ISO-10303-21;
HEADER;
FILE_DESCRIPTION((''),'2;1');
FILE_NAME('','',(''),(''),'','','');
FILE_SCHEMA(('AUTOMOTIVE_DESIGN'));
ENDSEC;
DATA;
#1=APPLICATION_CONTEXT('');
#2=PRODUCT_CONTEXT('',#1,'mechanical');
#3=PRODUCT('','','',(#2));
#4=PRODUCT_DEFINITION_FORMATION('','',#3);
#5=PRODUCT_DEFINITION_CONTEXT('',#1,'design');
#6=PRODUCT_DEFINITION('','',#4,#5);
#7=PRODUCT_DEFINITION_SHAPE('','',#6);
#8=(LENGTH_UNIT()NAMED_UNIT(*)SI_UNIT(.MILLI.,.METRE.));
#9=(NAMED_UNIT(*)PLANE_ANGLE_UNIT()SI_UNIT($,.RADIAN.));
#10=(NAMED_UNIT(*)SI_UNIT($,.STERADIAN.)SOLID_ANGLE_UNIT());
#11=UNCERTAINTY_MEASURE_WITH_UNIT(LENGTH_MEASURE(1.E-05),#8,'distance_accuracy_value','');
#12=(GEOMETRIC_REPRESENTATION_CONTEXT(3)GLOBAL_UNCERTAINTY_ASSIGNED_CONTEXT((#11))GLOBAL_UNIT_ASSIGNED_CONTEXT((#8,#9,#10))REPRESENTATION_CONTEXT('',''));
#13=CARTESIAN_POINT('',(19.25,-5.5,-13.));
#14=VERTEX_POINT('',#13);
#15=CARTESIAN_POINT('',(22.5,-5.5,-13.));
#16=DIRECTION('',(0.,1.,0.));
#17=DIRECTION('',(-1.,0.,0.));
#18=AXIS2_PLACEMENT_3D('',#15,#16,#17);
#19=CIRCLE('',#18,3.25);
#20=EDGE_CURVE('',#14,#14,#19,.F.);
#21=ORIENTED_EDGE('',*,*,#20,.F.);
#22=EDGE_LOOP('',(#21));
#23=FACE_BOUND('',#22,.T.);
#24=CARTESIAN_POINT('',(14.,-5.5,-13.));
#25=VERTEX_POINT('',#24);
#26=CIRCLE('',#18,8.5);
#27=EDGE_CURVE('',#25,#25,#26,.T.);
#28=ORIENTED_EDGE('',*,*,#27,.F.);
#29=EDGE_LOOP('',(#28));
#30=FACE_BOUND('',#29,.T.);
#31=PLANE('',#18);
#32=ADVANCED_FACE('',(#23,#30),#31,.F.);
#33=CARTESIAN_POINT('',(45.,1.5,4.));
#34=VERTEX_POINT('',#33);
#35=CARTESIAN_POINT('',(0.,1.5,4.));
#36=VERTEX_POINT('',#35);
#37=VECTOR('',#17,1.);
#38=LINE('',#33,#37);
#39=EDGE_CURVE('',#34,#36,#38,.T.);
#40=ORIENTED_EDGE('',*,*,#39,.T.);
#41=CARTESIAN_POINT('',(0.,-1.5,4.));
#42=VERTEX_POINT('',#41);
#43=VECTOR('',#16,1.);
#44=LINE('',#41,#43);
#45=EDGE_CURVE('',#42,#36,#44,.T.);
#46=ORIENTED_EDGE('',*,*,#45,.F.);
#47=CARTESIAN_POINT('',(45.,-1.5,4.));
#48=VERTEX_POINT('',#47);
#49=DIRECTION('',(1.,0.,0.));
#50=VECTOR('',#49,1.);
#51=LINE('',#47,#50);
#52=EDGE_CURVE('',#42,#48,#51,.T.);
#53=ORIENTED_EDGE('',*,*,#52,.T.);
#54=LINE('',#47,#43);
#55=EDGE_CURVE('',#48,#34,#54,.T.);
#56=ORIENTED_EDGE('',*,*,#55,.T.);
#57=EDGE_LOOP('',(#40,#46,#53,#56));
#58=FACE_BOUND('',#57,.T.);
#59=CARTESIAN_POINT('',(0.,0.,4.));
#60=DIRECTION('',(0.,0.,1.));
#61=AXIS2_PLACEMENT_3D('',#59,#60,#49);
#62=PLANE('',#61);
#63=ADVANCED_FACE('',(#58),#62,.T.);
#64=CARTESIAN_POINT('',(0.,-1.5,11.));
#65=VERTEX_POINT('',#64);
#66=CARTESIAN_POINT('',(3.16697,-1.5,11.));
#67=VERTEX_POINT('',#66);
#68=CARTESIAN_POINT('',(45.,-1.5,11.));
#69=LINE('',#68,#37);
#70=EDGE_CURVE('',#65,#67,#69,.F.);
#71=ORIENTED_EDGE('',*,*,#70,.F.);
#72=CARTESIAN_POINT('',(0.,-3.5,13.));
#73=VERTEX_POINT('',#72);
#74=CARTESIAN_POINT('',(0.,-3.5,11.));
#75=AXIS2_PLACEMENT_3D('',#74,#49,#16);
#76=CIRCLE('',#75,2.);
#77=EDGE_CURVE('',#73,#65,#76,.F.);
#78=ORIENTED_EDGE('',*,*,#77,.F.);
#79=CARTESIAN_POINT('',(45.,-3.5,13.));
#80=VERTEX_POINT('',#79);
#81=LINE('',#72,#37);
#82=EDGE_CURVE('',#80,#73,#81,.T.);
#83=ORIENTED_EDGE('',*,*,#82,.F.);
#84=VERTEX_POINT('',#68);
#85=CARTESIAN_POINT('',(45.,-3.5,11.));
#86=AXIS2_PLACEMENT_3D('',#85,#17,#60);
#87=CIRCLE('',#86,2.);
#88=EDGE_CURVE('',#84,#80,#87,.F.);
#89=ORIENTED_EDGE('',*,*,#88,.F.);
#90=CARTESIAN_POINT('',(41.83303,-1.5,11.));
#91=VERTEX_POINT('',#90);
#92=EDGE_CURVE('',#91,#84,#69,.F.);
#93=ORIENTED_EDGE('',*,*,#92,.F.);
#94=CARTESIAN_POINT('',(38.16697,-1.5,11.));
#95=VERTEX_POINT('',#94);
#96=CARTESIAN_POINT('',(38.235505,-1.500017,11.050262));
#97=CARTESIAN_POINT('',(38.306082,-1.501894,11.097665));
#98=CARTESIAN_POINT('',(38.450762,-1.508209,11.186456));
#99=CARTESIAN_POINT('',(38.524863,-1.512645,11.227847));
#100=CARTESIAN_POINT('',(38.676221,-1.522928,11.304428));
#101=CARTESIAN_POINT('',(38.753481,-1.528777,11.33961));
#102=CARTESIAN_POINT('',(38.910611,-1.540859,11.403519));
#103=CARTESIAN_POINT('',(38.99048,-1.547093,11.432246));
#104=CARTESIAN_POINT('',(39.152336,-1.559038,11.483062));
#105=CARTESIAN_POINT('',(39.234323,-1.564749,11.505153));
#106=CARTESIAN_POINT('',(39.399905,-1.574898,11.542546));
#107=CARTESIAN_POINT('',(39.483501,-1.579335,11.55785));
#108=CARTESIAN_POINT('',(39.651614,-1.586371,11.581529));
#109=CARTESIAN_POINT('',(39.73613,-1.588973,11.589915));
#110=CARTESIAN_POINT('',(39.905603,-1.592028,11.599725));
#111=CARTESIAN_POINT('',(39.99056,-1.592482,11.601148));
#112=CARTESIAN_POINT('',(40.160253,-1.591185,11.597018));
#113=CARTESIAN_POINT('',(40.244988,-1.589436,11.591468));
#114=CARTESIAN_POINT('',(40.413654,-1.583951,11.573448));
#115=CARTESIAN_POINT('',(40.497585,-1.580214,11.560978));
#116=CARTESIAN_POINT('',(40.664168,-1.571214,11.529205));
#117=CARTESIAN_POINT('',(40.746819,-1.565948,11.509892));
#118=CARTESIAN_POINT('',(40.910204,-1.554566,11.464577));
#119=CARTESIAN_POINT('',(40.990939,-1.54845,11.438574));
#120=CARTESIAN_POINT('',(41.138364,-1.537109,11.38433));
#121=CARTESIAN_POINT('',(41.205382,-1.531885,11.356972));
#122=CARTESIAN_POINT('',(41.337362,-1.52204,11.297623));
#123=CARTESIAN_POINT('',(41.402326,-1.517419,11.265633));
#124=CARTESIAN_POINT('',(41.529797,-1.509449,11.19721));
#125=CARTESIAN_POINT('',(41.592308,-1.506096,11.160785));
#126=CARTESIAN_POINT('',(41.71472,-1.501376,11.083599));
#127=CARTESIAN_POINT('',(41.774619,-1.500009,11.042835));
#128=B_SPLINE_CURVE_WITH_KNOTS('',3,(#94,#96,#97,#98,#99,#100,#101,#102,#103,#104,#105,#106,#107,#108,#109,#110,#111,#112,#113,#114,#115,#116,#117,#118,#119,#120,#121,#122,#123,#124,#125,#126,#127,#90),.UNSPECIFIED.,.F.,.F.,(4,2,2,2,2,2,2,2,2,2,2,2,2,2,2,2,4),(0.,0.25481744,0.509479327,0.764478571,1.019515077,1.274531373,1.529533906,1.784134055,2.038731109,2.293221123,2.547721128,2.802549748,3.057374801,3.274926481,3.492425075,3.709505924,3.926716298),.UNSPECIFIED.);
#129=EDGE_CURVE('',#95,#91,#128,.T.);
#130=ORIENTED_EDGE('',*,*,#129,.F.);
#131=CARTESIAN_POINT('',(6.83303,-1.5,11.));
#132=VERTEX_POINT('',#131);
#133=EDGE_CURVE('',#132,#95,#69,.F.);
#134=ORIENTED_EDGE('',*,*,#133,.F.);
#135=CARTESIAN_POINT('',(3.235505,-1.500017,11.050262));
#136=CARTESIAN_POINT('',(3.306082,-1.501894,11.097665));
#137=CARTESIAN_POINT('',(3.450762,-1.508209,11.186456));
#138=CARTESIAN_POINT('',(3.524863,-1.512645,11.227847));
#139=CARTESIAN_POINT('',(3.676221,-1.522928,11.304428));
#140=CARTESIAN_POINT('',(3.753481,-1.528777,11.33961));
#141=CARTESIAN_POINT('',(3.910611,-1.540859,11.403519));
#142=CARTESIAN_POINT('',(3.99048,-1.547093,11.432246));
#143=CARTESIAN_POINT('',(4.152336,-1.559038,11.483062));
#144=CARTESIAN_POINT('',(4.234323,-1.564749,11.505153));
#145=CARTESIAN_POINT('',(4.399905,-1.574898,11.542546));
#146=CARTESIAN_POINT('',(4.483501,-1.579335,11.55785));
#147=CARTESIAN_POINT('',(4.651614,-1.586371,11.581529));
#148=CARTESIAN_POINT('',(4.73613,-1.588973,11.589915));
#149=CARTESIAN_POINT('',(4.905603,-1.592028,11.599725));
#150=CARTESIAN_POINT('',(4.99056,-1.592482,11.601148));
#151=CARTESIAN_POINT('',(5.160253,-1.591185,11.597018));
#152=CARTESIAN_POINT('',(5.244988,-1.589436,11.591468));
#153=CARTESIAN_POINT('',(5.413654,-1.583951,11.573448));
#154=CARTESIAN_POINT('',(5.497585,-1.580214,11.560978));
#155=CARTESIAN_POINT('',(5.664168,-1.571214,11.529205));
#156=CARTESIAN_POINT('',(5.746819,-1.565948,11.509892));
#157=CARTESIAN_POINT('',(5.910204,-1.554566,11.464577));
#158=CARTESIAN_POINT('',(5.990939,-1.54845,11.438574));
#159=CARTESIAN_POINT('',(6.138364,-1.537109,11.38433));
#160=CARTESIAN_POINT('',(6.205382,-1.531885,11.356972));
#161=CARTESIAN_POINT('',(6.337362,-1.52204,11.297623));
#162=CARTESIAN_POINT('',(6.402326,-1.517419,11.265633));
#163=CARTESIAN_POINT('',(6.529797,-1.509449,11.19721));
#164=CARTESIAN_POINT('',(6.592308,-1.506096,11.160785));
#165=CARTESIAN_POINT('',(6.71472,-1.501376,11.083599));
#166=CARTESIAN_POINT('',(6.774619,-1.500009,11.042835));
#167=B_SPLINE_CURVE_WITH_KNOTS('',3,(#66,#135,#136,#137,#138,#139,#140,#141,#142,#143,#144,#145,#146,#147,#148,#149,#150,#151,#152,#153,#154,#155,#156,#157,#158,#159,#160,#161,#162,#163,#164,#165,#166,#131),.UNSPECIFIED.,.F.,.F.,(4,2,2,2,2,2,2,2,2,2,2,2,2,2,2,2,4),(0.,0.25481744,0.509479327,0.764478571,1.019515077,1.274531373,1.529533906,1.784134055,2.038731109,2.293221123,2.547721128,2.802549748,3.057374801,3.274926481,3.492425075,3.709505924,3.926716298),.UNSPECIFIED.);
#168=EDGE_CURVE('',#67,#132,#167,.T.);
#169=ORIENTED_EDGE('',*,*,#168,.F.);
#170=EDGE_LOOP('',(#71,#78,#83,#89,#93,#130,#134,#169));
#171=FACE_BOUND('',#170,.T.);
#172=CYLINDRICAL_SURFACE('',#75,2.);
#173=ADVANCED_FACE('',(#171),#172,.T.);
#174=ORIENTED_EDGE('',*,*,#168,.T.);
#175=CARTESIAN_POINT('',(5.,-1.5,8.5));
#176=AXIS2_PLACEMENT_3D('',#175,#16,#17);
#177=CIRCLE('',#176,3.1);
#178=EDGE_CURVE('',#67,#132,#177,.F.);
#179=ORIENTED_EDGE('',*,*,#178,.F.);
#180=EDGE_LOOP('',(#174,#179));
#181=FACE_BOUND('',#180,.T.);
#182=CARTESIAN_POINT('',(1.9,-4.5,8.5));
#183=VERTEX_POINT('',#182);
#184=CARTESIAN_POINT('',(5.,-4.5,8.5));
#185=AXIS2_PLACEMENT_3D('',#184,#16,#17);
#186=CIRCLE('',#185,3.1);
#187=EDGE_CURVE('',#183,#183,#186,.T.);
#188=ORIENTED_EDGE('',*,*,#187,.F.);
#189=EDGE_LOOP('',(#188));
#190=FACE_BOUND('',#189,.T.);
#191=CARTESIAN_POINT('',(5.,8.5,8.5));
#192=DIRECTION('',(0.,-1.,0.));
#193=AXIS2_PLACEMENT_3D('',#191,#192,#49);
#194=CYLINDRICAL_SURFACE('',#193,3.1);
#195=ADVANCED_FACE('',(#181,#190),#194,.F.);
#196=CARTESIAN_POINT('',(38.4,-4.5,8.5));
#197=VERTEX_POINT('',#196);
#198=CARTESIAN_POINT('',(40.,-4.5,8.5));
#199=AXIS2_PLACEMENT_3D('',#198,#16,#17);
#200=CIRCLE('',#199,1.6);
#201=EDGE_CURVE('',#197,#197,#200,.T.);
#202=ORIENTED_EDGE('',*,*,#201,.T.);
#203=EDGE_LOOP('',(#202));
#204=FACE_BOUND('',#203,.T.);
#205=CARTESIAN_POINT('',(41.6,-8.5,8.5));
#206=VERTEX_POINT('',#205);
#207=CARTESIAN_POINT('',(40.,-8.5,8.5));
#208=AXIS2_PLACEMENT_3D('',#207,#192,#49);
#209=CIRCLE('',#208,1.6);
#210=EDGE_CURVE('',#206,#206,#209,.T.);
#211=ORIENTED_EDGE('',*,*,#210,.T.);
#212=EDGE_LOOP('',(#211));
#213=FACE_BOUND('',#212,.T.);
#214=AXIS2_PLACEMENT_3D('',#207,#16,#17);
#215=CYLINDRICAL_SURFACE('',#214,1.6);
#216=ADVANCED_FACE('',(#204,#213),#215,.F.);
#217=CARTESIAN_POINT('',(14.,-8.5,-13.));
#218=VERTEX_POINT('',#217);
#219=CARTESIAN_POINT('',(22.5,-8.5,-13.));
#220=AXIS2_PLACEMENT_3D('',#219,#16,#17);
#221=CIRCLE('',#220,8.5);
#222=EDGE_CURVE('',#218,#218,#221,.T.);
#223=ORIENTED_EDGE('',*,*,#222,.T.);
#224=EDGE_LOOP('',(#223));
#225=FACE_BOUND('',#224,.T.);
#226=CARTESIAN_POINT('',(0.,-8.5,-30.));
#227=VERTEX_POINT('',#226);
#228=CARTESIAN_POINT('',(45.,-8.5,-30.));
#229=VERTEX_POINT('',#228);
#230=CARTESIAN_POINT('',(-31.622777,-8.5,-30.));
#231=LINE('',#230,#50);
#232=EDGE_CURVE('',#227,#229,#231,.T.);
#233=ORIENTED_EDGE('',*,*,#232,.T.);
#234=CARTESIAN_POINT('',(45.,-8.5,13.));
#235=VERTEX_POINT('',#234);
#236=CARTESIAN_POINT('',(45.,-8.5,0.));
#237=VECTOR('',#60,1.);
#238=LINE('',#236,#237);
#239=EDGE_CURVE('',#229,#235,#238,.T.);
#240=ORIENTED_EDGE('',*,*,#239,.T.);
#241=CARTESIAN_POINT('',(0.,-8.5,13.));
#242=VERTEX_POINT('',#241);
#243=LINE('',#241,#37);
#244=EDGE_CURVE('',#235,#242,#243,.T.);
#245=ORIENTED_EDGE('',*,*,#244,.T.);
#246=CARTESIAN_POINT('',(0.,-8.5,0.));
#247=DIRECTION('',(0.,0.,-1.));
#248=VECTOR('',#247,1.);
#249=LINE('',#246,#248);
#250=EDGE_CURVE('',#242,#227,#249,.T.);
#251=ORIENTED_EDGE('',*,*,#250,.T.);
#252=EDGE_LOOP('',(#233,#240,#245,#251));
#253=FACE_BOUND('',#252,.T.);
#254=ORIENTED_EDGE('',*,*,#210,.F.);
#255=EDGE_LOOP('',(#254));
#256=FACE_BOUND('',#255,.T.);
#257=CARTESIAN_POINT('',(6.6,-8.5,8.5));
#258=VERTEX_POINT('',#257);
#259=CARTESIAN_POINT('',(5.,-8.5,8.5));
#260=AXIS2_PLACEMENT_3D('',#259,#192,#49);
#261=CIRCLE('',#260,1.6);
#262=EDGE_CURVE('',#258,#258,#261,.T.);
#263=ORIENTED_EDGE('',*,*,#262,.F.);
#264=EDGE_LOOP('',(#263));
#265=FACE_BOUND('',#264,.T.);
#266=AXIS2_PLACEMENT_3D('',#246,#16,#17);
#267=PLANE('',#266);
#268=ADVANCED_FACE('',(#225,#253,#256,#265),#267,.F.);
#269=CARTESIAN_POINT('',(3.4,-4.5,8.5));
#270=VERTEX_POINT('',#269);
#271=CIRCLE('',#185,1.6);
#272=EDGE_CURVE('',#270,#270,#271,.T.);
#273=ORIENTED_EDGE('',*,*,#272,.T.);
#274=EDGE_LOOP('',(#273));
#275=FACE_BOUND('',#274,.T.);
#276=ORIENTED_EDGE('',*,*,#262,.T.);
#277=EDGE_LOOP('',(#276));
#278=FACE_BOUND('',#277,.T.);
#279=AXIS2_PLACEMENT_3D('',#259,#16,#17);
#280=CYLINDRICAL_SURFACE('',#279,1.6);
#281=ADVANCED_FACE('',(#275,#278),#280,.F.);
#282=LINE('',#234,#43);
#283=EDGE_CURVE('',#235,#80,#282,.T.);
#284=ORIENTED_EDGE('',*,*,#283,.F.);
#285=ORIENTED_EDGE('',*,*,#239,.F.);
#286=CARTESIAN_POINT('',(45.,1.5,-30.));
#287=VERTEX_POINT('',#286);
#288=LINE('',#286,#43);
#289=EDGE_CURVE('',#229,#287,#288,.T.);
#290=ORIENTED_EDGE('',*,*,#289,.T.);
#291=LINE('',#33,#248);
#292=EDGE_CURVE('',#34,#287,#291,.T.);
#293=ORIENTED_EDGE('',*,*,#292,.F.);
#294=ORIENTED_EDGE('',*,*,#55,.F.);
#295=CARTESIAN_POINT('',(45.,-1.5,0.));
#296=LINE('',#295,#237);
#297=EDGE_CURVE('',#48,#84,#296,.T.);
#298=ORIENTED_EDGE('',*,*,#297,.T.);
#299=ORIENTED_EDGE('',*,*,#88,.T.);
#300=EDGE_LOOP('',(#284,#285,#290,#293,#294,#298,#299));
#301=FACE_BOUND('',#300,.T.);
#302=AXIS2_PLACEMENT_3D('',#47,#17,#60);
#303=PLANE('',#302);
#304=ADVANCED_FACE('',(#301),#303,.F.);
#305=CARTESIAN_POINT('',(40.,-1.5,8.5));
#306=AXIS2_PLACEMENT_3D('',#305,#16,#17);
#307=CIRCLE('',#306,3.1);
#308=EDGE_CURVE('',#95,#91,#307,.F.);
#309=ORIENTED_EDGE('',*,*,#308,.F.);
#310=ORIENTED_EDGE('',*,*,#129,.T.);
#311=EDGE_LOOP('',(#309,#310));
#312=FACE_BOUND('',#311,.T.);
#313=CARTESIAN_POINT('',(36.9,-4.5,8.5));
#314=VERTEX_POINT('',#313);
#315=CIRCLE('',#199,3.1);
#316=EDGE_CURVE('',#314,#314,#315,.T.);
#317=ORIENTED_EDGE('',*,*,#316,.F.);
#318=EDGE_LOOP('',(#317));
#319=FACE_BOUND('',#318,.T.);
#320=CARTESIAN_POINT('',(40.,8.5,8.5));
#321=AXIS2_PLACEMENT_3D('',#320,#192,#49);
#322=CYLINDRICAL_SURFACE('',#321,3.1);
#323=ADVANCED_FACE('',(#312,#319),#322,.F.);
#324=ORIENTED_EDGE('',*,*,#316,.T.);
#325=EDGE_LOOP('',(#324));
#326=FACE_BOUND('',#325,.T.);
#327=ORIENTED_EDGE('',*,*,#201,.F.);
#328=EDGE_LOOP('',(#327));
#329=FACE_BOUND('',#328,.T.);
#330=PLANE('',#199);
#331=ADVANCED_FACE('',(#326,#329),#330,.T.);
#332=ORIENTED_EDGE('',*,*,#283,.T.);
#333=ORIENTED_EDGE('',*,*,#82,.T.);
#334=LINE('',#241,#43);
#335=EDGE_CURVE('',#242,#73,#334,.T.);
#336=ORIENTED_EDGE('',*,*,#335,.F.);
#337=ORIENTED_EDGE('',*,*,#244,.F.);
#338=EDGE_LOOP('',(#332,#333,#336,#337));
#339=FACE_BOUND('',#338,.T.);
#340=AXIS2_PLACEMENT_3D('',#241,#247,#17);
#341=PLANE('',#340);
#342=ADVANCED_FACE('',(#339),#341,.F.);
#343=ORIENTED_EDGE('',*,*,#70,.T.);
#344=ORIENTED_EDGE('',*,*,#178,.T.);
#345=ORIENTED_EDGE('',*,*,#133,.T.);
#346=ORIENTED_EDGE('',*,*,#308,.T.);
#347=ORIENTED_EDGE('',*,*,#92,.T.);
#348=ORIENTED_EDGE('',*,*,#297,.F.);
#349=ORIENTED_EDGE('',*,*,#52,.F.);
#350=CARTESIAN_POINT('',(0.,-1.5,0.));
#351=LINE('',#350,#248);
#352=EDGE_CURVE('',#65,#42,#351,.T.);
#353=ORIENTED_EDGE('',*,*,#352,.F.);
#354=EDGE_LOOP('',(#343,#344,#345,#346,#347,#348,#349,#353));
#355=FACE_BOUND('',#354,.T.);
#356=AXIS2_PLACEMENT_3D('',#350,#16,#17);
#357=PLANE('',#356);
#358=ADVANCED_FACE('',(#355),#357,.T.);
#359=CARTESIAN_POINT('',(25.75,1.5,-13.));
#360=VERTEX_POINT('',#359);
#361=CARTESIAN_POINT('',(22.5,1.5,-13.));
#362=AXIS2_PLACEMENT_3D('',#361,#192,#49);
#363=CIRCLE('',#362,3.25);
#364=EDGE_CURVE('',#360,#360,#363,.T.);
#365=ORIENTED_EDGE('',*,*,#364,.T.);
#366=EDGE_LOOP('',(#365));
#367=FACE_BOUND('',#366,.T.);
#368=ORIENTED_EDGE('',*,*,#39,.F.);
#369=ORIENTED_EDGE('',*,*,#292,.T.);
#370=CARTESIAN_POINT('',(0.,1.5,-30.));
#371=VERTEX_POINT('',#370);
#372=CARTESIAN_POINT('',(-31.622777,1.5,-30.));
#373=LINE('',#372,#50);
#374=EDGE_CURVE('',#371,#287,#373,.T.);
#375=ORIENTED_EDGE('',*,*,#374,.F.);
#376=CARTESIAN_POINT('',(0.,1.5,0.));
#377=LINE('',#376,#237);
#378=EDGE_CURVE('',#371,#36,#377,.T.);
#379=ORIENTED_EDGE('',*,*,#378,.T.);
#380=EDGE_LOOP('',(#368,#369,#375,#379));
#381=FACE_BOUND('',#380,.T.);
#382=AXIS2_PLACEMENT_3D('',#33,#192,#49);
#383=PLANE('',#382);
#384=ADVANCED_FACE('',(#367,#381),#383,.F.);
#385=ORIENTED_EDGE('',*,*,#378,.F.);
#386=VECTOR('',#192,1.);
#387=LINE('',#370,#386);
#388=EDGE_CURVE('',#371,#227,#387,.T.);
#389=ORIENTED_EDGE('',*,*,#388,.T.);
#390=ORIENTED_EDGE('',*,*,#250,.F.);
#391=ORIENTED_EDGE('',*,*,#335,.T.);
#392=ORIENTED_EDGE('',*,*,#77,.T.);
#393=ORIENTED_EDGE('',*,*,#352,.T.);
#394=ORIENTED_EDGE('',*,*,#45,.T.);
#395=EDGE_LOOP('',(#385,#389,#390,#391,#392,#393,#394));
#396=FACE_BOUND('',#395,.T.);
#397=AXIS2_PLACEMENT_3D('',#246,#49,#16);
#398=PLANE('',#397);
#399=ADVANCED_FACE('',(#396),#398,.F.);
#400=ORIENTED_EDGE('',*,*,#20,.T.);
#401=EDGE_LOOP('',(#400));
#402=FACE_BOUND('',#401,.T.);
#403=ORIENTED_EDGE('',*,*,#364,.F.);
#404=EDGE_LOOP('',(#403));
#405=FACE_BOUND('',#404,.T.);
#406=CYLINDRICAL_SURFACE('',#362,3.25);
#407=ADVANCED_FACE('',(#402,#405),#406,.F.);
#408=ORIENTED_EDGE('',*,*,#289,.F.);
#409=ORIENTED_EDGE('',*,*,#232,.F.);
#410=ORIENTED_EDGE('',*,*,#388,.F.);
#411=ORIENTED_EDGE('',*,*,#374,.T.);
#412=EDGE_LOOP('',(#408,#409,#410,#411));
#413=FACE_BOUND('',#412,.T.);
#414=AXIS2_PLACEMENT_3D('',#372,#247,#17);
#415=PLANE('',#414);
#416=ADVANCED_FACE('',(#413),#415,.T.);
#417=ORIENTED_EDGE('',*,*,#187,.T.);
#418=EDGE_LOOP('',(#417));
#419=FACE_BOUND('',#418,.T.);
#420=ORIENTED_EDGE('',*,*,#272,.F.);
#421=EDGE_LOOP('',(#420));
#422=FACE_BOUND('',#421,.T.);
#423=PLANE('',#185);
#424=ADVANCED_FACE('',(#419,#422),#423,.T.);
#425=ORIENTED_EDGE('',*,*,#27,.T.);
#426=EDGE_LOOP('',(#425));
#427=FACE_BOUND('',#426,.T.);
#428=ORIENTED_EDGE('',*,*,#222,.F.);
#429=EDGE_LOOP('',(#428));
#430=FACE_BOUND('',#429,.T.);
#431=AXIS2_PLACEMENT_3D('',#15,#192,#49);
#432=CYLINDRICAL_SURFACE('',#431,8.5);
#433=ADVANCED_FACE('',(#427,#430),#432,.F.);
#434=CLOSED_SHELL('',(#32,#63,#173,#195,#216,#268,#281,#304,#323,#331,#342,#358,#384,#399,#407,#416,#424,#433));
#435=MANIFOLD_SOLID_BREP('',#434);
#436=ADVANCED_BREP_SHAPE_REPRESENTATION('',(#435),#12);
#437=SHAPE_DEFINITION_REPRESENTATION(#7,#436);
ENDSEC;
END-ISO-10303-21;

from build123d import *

# Parameters (mm, degrees)
ESBO_O1_W                  = 90
ESBO_O1_H                  = 3
RESSALTO_EXTRUS_O1_DEPTH   = 4
ESBO_O2_W                  = 45
ESBO_O2_H                  = 13
ESBO_O2_R                  = 1.6
RESSALTO_EXTRUS_O3_DEPTH   = 7
CORTE_EXTRUS_O1_DEPTH      = 10
CORTE_EXTRUS_O1_DEPTH_BACK = 3
ESBO_O3_R                  = 3.1
FILETE3_R                  = 2
ESBO_O4_W                  = 45
ESBO_O4_H                  = 3
CORTE_EXTRUS_O2_DEPTH      = 47.671726032
ESBO_O5_W                  = 30
ESBO_O5_H                  = 10
RESSALTO_EXTRUS_O4_DEPTH   = 45
ESBO_O6_R                  = 3.25
CORTE_EXTRUS_O3_DEPTH      = 56.000000082
ESBO_O7_R                  = 8.5
CORTE_EXTRUS_O5_DEPTH      = 3


with BuildPart() as part:
    # Esboço1 → Ressalto-extrusão1 (new body)
    with BuildSketch(Plane.XY):
        Rectangle(ESBO_O1_W, ESBO_O1_H)
    extrude(amount=RESSALTO_EXTRUS_O1_DEPTH)

    # Esboço2 → Ressalto-extrusão3 (add)
    with BuildSketch(Plane.XZ.offset(1.5)):
        with Locations((22.5, 6.5)):
            Rectangle(ESBO_O2_W, ESBO_O2_H)
        with Locations((40, 8.5)):
            Circle(ESBO_O2_R, mode=Mode.SUBTRACT)
        with Locations((5, 8.5)):
            Circle(ESBO_O2_R, mode=Mode.SUBTRACT)
    extrude(amount=RESSALTO_EXTRUS_O3_DEPTH)

    # Esboço3 → Corte-extrusão1 (cut, two sides: drawn at the far end of the back side and taken through both)
    with BuildSketch(Plane(origin=(0, -1.5, 0), x_dir=(1, 0, 0), z_dir=(0, 1, 0)).offset(-CORTE_EXTRUS_O1_DEPTH_BACK)):
        with Locations(Location((5, -8.5, 0), (0, 0, 180))):
            Circle(ESBO_O3_R)
        with Locations(Location((40, -8.5, 0), (0, 0, 180))):
            Circle(ESBO_O3_R)
    extrude(amount=CORTE_EXTRUS_O1_DEPTH + CORTE_EXTRUS_O1_DEPTH_BACK, mode=Mode.SUBTRACT)

    # Filete3
    # the kernel refuses this fillet: 2 mm, written as the material it takes off along each edge
    with BuildSketch(Plane(origin=(50, -1.5, 13), x_dir=(0, 0, -1), z_dir=(-1, 0, 0))) as filete3_piece_1:
        with BuildLine():
            CenterArc((FILETE3_R, FILETE3_R), FILETE3_R, 180, 90)
            Line((0, FILETE3_R), (0, 0))
            Line((0, 0), (FILETE3_R, 0))
        make_face()
    extrude(amount=55, mode=Mode.SUBTRACT)

    # Esboço4 → Corte-extrusão2 (cut, through all)
    with BuildSketch(Plane.XY.offset(4)):
        with Locations((-22.5, 0)):
            Rectangle(ESBO_O4_W, ESBO_O4_H)
    extrude(amount=-CORTE_EXTRUS_O2_DEPTH, mode=Mode.SUBTRACT)

    # Esboço5 → Ressalto-extrusão4 (add)
    with BuildSketch(Plane(origin=(45, 0, 0), x_dir=(0, 0, -1), z_dir=(1, 0, 0))):
        with Locations((15, -3.5)):
            Rectangle(ESBO_O5_W, ESBO_O5_H)
    extrude(amount=-RESSALTO_EXTRUS_O4_DEPTH)

    # Esboço6 → Corte-extrusão3 (cut, through all)
    with BuildSketch(Plane.XZ.offset(8.5)):
        with Locations((22.5, -13)):
            Circle(ESBO_O6_R)
    extrude(amount=-CORTE_EXTRUS_O3_DEPTH, mode=Mode.SUBTRACT)

    # Esboço7 → Corte-extrusão5 (cut)
    with BuildSketch(Plane(origin=(0, -8.5, 0), x_dir=(1, 0, 0), z_dir=(0, 1, 0))):
        with Locations(Location((22.5, 13, 0), (0, 0, 180))):
            Circle(ESBO_O7_R)
    extrude(amount=CORTE_EXTRUS_O5_DEPTH, mode=Mode.SUBTRACT)


solid = part.part
